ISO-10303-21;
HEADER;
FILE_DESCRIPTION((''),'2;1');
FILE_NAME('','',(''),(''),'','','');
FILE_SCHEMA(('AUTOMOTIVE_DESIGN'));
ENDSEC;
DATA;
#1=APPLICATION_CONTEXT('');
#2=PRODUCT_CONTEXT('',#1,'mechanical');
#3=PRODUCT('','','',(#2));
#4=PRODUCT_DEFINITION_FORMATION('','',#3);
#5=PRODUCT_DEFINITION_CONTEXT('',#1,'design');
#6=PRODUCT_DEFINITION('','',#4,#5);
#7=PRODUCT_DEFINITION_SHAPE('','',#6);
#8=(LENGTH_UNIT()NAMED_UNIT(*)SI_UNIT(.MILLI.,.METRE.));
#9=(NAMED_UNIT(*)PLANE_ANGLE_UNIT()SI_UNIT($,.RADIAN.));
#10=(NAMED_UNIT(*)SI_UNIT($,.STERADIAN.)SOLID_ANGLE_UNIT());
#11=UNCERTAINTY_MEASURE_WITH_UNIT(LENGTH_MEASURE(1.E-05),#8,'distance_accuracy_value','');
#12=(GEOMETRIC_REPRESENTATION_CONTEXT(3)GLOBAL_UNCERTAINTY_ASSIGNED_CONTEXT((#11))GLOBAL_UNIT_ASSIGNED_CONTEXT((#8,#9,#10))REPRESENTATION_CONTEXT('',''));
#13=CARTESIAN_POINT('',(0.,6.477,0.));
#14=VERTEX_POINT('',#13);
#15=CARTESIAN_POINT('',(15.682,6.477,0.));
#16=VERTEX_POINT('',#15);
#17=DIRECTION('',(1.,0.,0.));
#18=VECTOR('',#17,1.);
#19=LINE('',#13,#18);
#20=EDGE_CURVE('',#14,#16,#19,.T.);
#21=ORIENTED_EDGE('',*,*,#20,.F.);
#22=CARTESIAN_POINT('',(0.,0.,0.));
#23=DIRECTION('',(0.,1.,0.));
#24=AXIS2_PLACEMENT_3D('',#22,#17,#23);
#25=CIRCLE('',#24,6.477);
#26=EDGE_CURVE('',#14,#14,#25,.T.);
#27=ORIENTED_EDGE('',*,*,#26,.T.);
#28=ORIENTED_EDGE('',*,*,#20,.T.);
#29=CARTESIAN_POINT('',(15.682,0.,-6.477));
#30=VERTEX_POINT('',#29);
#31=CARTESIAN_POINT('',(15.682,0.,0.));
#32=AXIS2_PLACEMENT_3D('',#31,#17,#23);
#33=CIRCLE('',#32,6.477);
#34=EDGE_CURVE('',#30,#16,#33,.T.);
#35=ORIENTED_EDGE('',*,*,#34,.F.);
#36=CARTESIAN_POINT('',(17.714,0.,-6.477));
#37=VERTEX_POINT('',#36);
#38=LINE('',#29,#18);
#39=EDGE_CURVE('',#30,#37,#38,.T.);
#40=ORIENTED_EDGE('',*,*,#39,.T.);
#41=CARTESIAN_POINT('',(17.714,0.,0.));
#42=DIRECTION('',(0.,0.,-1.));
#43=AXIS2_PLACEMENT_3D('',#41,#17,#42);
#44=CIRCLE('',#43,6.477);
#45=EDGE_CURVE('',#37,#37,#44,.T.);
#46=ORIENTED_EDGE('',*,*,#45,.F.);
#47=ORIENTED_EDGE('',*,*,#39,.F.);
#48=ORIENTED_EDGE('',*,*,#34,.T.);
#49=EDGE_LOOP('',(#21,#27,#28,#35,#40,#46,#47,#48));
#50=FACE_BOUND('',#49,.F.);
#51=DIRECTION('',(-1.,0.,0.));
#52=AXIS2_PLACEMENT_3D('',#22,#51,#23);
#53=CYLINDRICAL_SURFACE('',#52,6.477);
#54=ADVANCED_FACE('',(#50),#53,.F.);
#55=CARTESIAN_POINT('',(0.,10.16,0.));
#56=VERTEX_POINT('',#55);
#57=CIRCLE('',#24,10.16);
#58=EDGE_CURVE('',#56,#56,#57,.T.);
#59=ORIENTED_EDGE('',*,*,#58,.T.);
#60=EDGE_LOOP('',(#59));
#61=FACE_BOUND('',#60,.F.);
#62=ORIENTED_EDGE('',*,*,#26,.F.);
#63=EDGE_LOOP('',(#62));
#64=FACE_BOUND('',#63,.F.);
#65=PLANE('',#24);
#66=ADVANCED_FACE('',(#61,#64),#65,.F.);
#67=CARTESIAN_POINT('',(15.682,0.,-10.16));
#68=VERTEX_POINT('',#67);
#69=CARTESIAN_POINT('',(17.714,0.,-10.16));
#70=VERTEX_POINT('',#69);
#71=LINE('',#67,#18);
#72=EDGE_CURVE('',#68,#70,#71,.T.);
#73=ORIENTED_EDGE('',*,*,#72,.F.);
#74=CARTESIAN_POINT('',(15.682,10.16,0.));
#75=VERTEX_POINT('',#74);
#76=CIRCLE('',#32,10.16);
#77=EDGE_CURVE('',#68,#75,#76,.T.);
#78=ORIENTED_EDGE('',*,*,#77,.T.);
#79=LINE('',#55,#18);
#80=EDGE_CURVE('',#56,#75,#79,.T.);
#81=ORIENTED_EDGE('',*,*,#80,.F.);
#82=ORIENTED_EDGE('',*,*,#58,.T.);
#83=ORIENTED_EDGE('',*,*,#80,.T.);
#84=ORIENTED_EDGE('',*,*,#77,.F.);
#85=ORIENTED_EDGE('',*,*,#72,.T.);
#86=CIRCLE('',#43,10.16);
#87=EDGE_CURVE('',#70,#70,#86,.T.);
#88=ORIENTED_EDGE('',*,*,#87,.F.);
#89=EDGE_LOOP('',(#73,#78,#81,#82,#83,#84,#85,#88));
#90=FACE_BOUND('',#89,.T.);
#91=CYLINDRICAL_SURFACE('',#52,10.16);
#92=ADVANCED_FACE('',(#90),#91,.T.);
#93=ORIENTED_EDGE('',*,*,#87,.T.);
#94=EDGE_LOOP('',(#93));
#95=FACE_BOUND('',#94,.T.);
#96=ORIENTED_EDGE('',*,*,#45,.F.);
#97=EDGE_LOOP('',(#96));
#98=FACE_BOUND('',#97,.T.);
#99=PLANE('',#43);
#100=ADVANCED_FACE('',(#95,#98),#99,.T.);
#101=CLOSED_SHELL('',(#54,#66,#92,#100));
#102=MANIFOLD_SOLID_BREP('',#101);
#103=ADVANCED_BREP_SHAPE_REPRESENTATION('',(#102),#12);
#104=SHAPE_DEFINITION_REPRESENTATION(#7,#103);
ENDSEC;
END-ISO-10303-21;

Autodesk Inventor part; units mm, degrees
ref_plane "YZ Plane" through (0, 0, 0) normal (1, 0, 0) x (0, 1, 0)
ref_plane "XZ Plane" through (0, 0, 0) normal (0, 1, 0) x (-1, 0, 0)
ref_plane "XY Plane" through (0, 0, 0) normal (0, 0, 1) x (1, 0, 0)
sketch "Sketch1" plane through (0, 0, 0) normal (1, 0, 0) x (0, 1, 0)
  circle A0 centre (0, 0) radius 6.477
  circle A1 centre (0, 0) radius 10.16
  dimension "d0" = 12.954
  dimension "d1" = 20.32
extrude "Extrusion1" add sketch "Sketch1" along normal blind 15.682
sketch "Sketch2" plane through (15.682, 0, 0) normal (1, 0, 0) x (0, 0, -1)
  circle A0 centre (0, 0) radius 10.16 projected
  circle A1 centre (0, 0) radius 6.477 projected
extrude "Extrusion2" add sketch "Sketch2" along normal blind 2.032
properties part number "CH-1(Diff Spacer1)"
